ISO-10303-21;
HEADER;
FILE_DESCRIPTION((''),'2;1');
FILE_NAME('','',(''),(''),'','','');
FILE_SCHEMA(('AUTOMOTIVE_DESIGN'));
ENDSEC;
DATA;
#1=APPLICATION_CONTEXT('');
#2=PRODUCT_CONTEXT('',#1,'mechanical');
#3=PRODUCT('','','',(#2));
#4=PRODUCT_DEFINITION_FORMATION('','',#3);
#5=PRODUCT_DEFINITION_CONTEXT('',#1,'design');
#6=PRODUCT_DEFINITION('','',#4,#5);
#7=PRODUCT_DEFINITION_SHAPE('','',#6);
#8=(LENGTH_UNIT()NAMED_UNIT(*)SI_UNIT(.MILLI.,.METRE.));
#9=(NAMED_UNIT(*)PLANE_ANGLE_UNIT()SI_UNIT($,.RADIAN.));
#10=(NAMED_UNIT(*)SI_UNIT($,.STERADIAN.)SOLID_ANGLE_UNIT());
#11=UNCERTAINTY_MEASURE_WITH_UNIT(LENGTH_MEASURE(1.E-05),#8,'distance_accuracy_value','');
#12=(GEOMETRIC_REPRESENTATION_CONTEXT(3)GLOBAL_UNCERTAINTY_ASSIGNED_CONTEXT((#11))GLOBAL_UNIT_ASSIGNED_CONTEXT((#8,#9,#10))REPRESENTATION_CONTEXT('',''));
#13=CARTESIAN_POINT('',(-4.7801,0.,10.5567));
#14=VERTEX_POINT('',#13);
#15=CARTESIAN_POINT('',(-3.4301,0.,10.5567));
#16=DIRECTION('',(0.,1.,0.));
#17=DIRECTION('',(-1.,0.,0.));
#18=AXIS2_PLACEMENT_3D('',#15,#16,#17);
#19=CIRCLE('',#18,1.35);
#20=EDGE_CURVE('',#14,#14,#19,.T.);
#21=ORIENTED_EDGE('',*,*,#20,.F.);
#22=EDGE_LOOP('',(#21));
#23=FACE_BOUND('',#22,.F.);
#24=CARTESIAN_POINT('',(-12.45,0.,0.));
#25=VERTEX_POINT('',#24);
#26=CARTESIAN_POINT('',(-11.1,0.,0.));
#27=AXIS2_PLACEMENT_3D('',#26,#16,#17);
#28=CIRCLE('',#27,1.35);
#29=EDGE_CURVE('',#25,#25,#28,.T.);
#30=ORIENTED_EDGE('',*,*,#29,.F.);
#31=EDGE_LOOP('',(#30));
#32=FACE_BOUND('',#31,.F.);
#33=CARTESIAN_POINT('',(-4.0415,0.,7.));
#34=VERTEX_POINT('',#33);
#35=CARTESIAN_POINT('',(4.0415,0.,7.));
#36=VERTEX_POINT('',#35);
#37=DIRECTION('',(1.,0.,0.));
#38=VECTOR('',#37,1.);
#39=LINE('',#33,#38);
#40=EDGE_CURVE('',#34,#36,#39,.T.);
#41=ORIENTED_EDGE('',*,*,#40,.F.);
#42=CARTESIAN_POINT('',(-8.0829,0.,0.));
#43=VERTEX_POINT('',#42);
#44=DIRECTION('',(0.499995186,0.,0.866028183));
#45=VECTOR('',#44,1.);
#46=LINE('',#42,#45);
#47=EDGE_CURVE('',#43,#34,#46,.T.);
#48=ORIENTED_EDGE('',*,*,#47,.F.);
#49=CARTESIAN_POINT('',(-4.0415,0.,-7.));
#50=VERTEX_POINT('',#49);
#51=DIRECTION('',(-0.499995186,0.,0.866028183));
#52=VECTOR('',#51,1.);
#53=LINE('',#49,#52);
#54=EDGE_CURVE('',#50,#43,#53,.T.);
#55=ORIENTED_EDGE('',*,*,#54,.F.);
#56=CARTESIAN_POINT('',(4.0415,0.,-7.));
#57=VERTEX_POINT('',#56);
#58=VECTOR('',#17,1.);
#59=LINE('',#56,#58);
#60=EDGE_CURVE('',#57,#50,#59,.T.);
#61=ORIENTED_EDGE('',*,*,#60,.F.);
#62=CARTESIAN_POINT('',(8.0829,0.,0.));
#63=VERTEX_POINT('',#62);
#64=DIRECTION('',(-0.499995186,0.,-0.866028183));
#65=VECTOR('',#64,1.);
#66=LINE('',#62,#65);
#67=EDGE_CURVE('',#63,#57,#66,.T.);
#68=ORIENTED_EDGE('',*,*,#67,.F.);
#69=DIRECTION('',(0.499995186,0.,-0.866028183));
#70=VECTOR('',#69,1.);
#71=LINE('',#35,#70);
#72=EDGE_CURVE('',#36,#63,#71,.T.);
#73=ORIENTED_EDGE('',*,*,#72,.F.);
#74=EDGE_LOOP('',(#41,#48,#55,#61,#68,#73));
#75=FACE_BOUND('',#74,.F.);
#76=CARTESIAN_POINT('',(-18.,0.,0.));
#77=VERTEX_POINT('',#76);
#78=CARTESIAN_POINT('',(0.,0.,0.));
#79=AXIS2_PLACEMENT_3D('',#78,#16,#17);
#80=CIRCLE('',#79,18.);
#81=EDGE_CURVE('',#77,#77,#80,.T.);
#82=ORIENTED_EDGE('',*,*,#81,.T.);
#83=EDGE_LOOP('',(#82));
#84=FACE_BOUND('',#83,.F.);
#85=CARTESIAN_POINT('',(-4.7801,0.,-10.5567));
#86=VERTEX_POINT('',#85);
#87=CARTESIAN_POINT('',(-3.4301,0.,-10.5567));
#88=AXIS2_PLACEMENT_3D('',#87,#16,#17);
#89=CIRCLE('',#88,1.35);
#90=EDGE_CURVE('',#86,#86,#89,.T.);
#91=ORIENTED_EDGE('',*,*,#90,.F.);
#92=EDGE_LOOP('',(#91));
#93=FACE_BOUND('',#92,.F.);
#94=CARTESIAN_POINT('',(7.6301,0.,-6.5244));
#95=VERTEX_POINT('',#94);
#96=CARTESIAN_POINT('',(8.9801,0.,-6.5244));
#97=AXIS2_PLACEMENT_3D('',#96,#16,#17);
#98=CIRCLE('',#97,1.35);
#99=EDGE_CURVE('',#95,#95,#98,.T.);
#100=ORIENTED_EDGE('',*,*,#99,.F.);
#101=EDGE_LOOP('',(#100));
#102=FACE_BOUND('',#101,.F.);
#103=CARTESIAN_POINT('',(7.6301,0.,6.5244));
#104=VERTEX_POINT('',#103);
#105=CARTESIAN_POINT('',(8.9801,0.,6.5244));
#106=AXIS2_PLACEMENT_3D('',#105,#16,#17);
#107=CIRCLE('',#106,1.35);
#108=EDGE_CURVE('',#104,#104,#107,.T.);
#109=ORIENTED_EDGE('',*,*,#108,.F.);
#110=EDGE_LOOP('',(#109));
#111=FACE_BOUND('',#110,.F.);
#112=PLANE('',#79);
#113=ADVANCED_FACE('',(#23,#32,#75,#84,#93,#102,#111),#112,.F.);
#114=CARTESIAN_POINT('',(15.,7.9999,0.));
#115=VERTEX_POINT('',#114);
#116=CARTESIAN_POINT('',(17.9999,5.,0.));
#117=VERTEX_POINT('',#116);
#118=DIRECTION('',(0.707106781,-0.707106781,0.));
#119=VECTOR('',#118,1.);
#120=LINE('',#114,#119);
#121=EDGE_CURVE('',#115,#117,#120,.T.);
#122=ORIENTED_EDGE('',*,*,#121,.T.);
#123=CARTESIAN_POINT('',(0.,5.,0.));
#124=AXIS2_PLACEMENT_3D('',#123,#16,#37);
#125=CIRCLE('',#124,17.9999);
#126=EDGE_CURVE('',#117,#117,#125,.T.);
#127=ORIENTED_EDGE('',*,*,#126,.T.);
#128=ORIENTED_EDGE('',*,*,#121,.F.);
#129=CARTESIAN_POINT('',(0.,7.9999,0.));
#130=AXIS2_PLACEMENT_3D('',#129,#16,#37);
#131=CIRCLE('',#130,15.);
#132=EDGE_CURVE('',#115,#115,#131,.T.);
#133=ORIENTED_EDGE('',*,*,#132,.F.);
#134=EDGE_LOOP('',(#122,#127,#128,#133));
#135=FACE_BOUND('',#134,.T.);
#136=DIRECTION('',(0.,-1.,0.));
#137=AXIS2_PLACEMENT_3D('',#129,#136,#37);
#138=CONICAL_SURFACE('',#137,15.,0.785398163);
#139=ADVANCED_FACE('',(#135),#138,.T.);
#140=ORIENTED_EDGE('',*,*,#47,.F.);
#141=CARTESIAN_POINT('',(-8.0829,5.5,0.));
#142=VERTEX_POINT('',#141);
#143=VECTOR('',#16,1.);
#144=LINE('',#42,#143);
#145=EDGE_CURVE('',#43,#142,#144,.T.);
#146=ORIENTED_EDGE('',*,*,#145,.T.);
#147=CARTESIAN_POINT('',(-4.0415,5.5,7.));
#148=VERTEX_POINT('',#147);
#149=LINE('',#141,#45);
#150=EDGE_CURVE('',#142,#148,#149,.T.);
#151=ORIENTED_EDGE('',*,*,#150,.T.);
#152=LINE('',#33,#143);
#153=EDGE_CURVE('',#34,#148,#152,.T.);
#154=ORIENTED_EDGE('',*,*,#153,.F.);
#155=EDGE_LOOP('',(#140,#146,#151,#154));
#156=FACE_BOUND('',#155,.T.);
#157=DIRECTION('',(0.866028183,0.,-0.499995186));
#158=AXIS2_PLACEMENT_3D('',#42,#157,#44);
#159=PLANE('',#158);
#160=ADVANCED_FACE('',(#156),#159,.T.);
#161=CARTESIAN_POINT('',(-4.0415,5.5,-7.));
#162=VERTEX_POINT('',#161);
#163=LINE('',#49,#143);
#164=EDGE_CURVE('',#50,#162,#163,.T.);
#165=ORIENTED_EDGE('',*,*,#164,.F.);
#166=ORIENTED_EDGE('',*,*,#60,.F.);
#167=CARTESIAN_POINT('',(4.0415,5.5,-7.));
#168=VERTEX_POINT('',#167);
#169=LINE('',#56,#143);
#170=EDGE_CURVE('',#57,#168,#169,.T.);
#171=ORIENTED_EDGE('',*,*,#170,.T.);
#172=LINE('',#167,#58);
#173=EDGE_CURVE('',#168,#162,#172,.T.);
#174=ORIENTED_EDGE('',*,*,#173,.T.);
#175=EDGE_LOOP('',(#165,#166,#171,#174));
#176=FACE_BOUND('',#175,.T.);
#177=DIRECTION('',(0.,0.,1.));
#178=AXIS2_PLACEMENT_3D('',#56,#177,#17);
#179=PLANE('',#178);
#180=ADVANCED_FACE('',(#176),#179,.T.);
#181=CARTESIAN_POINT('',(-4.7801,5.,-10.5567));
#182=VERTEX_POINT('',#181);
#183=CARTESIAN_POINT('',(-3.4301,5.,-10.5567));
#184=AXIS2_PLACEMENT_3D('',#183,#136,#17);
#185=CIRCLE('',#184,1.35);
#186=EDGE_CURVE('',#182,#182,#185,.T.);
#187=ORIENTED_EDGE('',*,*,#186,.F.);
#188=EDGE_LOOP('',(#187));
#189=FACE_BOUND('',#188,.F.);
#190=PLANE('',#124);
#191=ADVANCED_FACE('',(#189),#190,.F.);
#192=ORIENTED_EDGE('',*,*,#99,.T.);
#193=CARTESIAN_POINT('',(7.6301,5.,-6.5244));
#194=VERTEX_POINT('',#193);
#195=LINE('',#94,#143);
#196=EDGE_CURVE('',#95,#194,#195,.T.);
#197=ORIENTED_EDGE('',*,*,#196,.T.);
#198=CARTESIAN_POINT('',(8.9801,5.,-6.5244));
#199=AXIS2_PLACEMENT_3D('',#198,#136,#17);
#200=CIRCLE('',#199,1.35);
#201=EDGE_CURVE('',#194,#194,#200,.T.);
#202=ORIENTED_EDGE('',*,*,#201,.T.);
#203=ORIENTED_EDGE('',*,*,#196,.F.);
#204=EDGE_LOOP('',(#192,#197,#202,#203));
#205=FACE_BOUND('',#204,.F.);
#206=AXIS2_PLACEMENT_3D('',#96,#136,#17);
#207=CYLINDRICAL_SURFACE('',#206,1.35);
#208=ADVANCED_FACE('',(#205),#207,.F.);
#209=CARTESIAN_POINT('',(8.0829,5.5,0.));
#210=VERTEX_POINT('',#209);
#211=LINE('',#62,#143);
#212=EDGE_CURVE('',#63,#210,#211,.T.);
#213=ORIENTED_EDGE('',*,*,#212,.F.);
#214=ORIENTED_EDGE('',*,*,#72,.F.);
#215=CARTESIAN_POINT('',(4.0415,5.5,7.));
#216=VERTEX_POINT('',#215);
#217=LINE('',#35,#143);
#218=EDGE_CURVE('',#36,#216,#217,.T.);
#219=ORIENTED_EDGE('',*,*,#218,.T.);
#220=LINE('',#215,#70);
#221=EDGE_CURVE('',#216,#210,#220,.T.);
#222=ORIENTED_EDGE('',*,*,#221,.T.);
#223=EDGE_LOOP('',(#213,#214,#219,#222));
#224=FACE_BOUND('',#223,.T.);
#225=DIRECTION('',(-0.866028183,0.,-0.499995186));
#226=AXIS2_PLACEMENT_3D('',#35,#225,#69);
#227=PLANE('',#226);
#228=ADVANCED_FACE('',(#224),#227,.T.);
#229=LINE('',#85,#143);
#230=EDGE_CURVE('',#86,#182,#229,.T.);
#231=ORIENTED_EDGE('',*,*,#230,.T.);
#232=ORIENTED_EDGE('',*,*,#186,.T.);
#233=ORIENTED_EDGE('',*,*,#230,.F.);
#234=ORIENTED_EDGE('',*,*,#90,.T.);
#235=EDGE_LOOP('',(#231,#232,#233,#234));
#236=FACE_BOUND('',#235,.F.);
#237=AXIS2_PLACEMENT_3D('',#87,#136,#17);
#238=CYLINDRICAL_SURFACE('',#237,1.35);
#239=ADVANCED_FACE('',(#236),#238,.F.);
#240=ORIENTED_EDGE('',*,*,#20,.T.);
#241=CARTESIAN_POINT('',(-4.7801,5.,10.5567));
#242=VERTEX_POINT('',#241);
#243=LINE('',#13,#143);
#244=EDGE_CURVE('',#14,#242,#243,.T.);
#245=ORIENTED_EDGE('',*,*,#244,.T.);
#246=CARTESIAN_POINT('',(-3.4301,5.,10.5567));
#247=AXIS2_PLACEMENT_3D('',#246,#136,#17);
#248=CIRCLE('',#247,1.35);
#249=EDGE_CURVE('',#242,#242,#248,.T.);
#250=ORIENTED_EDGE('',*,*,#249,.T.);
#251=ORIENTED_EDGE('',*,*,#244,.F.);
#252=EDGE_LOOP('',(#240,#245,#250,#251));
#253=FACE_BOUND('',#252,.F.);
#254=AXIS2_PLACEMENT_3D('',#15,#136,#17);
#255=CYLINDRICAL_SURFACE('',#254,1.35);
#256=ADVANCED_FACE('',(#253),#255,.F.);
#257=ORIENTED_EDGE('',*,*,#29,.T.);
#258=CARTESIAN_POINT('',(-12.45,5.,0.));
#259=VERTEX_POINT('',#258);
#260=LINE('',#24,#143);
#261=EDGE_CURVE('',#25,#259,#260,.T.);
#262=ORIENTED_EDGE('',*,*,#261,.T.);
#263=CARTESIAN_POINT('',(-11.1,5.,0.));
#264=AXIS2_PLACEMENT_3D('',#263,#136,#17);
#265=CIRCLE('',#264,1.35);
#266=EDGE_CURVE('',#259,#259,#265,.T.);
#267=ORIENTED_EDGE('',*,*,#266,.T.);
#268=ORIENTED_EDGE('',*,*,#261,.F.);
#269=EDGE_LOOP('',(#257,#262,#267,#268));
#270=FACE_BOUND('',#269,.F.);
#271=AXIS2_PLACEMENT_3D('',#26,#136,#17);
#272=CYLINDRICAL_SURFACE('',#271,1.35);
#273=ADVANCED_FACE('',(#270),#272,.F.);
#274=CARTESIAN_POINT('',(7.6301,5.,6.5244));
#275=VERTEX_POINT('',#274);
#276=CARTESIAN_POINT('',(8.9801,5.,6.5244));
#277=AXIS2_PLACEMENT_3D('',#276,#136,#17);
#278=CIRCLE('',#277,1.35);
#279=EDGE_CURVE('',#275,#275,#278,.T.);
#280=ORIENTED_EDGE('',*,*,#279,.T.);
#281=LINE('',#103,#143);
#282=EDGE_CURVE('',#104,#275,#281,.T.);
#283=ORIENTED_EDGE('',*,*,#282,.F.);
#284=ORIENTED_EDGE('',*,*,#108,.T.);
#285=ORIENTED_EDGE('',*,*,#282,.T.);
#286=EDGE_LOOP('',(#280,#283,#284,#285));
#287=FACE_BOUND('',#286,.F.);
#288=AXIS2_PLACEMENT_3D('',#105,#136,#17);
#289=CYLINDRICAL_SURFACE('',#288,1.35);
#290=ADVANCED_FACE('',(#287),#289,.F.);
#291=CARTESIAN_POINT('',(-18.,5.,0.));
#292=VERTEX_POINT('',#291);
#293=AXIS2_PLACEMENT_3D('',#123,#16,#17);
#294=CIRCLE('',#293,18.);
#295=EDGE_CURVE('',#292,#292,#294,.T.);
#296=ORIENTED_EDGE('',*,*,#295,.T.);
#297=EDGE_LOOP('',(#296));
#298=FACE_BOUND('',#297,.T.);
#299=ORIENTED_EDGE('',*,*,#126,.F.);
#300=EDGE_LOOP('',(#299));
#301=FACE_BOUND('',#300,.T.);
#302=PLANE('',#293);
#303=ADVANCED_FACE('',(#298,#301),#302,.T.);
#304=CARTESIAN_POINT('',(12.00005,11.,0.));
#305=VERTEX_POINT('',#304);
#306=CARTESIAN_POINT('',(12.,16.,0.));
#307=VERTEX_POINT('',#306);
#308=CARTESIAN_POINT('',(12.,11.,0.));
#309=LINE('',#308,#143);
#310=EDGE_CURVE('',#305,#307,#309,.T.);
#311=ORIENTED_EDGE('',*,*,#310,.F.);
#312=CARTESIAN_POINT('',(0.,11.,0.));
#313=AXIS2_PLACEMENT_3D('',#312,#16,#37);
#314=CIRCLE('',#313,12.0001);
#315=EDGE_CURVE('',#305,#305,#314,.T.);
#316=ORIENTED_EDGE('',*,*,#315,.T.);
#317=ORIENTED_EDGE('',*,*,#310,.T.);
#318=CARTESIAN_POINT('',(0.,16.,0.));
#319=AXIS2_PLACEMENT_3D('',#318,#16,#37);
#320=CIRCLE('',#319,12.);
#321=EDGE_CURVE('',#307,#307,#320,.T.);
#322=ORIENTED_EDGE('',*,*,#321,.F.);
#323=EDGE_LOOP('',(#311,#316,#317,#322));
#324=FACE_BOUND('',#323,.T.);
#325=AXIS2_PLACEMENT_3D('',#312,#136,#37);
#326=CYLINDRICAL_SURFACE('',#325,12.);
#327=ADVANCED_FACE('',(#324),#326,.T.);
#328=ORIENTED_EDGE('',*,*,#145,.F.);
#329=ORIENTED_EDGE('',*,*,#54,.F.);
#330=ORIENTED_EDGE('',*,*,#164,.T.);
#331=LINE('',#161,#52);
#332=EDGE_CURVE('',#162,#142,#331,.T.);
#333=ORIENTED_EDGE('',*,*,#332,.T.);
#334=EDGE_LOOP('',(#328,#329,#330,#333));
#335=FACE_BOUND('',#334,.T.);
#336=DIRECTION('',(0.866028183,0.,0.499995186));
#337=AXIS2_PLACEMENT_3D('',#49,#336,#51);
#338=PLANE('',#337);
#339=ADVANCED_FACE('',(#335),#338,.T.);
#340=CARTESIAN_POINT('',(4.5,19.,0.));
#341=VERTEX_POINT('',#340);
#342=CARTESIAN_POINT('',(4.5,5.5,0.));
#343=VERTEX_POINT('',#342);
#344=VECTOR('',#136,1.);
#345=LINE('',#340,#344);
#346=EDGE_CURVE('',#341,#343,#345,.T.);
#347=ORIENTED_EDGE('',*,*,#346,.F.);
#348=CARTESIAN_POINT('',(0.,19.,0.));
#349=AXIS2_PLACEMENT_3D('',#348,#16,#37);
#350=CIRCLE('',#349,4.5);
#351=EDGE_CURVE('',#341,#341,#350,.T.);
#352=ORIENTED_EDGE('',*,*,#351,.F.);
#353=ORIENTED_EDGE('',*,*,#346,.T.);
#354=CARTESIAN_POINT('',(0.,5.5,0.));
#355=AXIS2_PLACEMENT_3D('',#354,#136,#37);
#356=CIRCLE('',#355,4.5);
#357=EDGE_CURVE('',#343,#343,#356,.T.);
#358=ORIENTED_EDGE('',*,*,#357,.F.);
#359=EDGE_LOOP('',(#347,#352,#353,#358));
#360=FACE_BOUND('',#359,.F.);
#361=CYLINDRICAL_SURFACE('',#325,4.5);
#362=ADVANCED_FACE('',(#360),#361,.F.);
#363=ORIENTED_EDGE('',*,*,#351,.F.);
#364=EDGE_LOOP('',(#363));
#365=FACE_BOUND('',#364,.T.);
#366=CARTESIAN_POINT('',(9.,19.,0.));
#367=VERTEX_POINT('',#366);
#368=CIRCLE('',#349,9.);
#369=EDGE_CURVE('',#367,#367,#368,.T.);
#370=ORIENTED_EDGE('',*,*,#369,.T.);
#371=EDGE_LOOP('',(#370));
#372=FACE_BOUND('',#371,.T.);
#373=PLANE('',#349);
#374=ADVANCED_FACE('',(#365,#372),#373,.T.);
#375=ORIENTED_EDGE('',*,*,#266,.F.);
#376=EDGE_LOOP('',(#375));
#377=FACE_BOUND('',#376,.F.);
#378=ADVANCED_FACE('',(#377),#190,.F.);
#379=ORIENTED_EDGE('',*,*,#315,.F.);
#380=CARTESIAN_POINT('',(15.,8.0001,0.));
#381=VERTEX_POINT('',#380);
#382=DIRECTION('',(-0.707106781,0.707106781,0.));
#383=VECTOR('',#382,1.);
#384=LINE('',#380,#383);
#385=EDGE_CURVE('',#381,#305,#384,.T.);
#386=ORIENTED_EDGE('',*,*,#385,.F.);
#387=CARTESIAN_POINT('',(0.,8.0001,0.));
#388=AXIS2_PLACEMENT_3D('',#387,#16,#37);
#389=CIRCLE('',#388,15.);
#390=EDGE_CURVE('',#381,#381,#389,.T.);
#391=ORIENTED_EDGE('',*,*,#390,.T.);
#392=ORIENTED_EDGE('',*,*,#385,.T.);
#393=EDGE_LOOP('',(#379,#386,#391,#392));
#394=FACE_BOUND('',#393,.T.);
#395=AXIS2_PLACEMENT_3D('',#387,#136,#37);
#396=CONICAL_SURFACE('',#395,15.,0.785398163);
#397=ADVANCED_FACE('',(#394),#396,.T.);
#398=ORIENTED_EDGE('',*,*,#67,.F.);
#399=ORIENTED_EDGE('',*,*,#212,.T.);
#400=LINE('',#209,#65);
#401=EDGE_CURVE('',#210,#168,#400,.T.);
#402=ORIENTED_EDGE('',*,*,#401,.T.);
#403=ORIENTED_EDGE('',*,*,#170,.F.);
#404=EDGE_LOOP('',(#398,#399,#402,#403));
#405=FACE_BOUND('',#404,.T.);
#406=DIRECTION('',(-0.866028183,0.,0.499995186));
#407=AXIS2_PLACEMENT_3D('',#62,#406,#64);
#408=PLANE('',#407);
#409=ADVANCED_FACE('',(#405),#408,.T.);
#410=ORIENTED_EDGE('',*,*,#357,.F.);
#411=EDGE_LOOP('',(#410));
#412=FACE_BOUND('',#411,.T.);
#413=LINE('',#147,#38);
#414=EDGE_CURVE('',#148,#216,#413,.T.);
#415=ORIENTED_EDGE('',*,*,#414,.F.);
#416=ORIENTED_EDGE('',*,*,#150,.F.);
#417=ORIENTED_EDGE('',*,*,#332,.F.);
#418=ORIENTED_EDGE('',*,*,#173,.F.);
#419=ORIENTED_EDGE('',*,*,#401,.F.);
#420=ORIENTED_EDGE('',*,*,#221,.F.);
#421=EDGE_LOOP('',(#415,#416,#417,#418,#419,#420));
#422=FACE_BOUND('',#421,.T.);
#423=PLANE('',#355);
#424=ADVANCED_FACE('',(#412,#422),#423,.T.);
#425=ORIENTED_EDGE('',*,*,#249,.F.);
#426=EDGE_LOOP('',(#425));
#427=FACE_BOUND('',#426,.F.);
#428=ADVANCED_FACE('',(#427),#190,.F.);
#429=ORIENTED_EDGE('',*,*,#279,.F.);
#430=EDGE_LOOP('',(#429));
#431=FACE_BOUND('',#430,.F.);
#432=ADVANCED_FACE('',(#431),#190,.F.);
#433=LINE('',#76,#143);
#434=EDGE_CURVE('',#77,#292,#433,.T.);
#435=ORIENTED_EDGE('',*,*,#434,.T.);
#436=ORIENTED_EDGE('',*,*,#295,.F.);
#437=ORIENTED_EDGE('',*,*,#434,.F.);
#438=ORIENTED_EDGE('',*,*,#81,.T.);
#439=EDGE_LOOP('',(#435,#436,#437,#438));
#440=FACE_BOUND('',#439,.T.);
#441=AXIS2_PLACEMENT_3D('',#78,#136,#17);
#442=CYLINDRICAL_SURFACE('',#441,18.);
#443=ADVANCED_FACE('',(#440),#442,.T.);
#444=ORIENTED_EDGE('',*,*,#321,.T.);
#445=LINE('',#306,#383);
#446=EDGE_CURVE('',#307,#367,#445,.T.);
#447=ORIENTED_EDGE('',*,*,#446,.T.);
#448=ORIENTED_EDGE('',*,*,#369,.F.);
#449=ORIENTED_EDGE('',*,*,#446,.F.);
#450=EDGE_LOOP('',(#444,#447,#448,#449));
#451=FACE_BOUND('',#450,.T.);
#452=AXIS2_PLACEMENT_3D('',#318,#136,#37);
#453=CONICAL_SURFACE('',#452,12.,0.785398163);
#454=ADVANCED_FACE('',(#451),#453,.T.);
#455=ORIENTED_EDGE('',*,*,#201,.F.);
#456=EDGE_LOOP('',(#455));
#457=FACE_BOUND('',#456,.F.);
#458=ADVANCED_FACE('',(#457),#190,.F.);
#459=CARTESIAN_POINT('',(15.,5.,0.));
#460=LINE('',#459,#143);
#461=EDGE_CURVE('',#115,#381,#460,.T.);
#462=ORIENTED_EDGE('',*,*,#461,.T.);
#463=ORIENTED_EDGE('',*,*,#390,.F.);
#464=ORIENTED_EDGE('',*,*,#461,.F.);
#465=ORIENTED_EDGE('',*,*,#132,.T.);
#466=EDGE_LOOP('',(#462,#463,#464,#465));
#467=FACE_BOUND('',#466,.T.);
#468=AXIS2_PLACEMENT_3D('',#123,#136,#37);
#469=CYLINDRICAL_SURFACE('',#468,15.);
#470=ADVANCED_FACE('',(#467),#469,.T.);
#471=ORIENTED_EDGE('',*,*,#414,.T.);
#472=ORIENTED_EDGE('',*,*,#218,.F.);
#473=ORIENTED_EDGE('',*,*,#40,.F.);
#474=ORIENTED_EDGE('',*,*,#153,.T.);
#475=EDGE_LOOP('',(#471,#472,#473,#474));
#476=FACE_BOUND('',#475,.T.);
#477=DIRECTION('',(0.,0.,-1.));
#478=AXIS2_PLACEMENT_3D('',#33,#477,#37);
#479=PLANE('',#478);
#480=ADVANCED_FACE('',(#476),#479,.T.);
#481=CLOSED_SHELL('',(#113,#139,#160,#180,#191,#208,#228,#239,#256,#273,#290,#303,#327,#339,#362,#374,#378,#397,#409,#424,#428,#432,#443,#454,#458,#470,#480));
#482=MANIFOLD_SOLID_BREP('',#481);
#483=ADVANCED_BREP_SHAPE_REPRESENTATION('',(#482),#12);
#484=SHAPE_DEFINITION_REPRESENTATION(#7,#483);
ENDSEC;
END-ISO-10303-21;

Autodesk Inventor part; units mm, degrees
ref_plane "YZ Plane" through (0, 0, 0) normal (1, 0, 0) x (0, 1, 0)
ref_plane "XZ Plane" through (0, 0, 0) normal (0, 1, 0) x (-1, 0, 0)
ref_plane "XY Plane" through (0, 0, 0) normal (0, 0, 1) x (1, 0, 0)
sketch "Sketch1" plane through (0, 0, 0) normal (0, 1, 0) x (-1, 0, 0)
  circle A0 centre (0, 0) radius 18
  line L0 (10.3065, -1.0922) -> (4.2236, -9.4646)
  line L1 (2.1462, -10.1396) -> (-7.6962, -6.9416)
  line L2 (-8.9801, -5.1744) -> (-8.9801, 5.1744)
  line L3 (-7.6962, 6.9416) -> (2.1462, 10.1396)
  line L4 (4.2236, 9.4646) -> (10.3065, 1.0922)
  circle A1 centre (3.4301, 10.5567) radius 1.35
  circle A2 centre (11.1, 0) radius 1.35
  circle A3 centre (-8.9801, 6.5244) radius 1.35
  circle A4 centre (-8.9801, -6.5244) radius 1.35
  circle A5 centre (3.4301, -10.5567) radius 1.35
  arc A6 (11.0179, 1.3475) -> (4.6863, 10.0622) centre (0, 0) ccw
  arc A7 (4.6863, -10.0622) -> (11.0179, -1.3475) centre (0, 0) ccw
  arc A8 (-8.1216, -7.5663) -> (2.1232, -10.8951) centre (0, 0) ccw
  arc A9 (2.1232, 10.8951) -> (-8.1216, 7.5663) centre (0, 0) ccw
  arc A10 (-9.7057, 5.386) -> (-9.7057, -5.386) centre (0, 0) ccw
  dimension "d0" = 36
  dimension "d2" = 2.7
  dimension "d3" = 2.7
  dimension "d4" = 2.7
  dimension "d5" = 2.7
  dimension "d6" = 2.7
extrude "Extrusion1" add sketch "Sketch1" along normal blind 5 contours A0 | A2 A7 A5 L0 | L0 A5 L1 A4 L2 A3 L3 A1 L4 A2 | L4 A1 A6 A2 | A5 A8 A4 L1 | L3 A3 A9 A1 | A10 A3 L2 A4
sketch "Sketch2" plane through (0, 5, 0) normal (0, 1, 0) x (1, 0, 0)
  circle A0 centre (0, 0) radius 18 projected
  circle A1 centre (0, 0) radius 15
  point P0 (2.5, -14.7902)
  point P1 (2.5, 14.7902)
  dimension "d9" = 30
extrude "Extrusion2" add sketch "Sketch2" along normal blind 6 contours A1
sketch "Sketch3" plane through (0, 0, 0) normal (0, -1, 0) x (1, 0, 0)
  circle A0 centre (0, 0) radius 18 projected
  line L0 (-8.0829, 0) -> (-4.0415, 7)
  line L1 (-4.0415, 7) -> (4.0415, 7)
  line L2 (4.0415, 7) -> (8.0829, 0)
  line L3 (8.0829, 0) -> (4.0415, -7)
  line L4 (4.0415, -7) -> (-4.0415, -7)
  line L5 (-4.0415, -7) -> (-8.0829, 0)
  dimension "d23" = 14
extrude "Extrusion3" cut sketch "Sketch3" against normal blind 5.5 contours L0 L1 L2 L3 L4 L5
sketch "Sketch4" plane through (0, 5.5, 0) normal (0, -1, 0) x (1, 0, 0)
  circle A0 centre (0, 0) radius 4.5
  dimension "d26" = 9
extrude "Extrusion4" cut sketch "Sketch4" against normal blind 9
chamfer "Chamfer1" distance 3 angle 45 2 edges at (-15, 5, 0) (-15, 11, 0)
sketch "Sketch5" plane through (0, 11, 0) normal (0, 1, 0) x (1, 0, 0)
  circle A0 centre (0, 0) radius 4.5 projected
  circle A1 centre (0, 0) radius 12 projected
extrude "Extrusion5" add sketch "Sketch5" along normal blind 8
chamfer "Chamfer2" distance 3 angle 45 1 edges at (-12, 19, 0)
equation "\"BendRadius\" = Thickness"
equation "\"BendReliefWidth\" = Thickness"
equation "\"BendReliefDepth\" = 0.5 * Thickness"
equation "\"CornerReliefSize\" = 4 * Thickness"
equation "\"MinimumRemnant\" = 2 * Thickness"
equation "\"TransitionRadius\" = BendRadius"
equation "\"JacobiRadiusSize\" = BendRadius"
equation "\"GapSize\" = Thickness"
equation "\"Thickness\" = 0.5"
properties part number "motorSupportNew1 modified2"
